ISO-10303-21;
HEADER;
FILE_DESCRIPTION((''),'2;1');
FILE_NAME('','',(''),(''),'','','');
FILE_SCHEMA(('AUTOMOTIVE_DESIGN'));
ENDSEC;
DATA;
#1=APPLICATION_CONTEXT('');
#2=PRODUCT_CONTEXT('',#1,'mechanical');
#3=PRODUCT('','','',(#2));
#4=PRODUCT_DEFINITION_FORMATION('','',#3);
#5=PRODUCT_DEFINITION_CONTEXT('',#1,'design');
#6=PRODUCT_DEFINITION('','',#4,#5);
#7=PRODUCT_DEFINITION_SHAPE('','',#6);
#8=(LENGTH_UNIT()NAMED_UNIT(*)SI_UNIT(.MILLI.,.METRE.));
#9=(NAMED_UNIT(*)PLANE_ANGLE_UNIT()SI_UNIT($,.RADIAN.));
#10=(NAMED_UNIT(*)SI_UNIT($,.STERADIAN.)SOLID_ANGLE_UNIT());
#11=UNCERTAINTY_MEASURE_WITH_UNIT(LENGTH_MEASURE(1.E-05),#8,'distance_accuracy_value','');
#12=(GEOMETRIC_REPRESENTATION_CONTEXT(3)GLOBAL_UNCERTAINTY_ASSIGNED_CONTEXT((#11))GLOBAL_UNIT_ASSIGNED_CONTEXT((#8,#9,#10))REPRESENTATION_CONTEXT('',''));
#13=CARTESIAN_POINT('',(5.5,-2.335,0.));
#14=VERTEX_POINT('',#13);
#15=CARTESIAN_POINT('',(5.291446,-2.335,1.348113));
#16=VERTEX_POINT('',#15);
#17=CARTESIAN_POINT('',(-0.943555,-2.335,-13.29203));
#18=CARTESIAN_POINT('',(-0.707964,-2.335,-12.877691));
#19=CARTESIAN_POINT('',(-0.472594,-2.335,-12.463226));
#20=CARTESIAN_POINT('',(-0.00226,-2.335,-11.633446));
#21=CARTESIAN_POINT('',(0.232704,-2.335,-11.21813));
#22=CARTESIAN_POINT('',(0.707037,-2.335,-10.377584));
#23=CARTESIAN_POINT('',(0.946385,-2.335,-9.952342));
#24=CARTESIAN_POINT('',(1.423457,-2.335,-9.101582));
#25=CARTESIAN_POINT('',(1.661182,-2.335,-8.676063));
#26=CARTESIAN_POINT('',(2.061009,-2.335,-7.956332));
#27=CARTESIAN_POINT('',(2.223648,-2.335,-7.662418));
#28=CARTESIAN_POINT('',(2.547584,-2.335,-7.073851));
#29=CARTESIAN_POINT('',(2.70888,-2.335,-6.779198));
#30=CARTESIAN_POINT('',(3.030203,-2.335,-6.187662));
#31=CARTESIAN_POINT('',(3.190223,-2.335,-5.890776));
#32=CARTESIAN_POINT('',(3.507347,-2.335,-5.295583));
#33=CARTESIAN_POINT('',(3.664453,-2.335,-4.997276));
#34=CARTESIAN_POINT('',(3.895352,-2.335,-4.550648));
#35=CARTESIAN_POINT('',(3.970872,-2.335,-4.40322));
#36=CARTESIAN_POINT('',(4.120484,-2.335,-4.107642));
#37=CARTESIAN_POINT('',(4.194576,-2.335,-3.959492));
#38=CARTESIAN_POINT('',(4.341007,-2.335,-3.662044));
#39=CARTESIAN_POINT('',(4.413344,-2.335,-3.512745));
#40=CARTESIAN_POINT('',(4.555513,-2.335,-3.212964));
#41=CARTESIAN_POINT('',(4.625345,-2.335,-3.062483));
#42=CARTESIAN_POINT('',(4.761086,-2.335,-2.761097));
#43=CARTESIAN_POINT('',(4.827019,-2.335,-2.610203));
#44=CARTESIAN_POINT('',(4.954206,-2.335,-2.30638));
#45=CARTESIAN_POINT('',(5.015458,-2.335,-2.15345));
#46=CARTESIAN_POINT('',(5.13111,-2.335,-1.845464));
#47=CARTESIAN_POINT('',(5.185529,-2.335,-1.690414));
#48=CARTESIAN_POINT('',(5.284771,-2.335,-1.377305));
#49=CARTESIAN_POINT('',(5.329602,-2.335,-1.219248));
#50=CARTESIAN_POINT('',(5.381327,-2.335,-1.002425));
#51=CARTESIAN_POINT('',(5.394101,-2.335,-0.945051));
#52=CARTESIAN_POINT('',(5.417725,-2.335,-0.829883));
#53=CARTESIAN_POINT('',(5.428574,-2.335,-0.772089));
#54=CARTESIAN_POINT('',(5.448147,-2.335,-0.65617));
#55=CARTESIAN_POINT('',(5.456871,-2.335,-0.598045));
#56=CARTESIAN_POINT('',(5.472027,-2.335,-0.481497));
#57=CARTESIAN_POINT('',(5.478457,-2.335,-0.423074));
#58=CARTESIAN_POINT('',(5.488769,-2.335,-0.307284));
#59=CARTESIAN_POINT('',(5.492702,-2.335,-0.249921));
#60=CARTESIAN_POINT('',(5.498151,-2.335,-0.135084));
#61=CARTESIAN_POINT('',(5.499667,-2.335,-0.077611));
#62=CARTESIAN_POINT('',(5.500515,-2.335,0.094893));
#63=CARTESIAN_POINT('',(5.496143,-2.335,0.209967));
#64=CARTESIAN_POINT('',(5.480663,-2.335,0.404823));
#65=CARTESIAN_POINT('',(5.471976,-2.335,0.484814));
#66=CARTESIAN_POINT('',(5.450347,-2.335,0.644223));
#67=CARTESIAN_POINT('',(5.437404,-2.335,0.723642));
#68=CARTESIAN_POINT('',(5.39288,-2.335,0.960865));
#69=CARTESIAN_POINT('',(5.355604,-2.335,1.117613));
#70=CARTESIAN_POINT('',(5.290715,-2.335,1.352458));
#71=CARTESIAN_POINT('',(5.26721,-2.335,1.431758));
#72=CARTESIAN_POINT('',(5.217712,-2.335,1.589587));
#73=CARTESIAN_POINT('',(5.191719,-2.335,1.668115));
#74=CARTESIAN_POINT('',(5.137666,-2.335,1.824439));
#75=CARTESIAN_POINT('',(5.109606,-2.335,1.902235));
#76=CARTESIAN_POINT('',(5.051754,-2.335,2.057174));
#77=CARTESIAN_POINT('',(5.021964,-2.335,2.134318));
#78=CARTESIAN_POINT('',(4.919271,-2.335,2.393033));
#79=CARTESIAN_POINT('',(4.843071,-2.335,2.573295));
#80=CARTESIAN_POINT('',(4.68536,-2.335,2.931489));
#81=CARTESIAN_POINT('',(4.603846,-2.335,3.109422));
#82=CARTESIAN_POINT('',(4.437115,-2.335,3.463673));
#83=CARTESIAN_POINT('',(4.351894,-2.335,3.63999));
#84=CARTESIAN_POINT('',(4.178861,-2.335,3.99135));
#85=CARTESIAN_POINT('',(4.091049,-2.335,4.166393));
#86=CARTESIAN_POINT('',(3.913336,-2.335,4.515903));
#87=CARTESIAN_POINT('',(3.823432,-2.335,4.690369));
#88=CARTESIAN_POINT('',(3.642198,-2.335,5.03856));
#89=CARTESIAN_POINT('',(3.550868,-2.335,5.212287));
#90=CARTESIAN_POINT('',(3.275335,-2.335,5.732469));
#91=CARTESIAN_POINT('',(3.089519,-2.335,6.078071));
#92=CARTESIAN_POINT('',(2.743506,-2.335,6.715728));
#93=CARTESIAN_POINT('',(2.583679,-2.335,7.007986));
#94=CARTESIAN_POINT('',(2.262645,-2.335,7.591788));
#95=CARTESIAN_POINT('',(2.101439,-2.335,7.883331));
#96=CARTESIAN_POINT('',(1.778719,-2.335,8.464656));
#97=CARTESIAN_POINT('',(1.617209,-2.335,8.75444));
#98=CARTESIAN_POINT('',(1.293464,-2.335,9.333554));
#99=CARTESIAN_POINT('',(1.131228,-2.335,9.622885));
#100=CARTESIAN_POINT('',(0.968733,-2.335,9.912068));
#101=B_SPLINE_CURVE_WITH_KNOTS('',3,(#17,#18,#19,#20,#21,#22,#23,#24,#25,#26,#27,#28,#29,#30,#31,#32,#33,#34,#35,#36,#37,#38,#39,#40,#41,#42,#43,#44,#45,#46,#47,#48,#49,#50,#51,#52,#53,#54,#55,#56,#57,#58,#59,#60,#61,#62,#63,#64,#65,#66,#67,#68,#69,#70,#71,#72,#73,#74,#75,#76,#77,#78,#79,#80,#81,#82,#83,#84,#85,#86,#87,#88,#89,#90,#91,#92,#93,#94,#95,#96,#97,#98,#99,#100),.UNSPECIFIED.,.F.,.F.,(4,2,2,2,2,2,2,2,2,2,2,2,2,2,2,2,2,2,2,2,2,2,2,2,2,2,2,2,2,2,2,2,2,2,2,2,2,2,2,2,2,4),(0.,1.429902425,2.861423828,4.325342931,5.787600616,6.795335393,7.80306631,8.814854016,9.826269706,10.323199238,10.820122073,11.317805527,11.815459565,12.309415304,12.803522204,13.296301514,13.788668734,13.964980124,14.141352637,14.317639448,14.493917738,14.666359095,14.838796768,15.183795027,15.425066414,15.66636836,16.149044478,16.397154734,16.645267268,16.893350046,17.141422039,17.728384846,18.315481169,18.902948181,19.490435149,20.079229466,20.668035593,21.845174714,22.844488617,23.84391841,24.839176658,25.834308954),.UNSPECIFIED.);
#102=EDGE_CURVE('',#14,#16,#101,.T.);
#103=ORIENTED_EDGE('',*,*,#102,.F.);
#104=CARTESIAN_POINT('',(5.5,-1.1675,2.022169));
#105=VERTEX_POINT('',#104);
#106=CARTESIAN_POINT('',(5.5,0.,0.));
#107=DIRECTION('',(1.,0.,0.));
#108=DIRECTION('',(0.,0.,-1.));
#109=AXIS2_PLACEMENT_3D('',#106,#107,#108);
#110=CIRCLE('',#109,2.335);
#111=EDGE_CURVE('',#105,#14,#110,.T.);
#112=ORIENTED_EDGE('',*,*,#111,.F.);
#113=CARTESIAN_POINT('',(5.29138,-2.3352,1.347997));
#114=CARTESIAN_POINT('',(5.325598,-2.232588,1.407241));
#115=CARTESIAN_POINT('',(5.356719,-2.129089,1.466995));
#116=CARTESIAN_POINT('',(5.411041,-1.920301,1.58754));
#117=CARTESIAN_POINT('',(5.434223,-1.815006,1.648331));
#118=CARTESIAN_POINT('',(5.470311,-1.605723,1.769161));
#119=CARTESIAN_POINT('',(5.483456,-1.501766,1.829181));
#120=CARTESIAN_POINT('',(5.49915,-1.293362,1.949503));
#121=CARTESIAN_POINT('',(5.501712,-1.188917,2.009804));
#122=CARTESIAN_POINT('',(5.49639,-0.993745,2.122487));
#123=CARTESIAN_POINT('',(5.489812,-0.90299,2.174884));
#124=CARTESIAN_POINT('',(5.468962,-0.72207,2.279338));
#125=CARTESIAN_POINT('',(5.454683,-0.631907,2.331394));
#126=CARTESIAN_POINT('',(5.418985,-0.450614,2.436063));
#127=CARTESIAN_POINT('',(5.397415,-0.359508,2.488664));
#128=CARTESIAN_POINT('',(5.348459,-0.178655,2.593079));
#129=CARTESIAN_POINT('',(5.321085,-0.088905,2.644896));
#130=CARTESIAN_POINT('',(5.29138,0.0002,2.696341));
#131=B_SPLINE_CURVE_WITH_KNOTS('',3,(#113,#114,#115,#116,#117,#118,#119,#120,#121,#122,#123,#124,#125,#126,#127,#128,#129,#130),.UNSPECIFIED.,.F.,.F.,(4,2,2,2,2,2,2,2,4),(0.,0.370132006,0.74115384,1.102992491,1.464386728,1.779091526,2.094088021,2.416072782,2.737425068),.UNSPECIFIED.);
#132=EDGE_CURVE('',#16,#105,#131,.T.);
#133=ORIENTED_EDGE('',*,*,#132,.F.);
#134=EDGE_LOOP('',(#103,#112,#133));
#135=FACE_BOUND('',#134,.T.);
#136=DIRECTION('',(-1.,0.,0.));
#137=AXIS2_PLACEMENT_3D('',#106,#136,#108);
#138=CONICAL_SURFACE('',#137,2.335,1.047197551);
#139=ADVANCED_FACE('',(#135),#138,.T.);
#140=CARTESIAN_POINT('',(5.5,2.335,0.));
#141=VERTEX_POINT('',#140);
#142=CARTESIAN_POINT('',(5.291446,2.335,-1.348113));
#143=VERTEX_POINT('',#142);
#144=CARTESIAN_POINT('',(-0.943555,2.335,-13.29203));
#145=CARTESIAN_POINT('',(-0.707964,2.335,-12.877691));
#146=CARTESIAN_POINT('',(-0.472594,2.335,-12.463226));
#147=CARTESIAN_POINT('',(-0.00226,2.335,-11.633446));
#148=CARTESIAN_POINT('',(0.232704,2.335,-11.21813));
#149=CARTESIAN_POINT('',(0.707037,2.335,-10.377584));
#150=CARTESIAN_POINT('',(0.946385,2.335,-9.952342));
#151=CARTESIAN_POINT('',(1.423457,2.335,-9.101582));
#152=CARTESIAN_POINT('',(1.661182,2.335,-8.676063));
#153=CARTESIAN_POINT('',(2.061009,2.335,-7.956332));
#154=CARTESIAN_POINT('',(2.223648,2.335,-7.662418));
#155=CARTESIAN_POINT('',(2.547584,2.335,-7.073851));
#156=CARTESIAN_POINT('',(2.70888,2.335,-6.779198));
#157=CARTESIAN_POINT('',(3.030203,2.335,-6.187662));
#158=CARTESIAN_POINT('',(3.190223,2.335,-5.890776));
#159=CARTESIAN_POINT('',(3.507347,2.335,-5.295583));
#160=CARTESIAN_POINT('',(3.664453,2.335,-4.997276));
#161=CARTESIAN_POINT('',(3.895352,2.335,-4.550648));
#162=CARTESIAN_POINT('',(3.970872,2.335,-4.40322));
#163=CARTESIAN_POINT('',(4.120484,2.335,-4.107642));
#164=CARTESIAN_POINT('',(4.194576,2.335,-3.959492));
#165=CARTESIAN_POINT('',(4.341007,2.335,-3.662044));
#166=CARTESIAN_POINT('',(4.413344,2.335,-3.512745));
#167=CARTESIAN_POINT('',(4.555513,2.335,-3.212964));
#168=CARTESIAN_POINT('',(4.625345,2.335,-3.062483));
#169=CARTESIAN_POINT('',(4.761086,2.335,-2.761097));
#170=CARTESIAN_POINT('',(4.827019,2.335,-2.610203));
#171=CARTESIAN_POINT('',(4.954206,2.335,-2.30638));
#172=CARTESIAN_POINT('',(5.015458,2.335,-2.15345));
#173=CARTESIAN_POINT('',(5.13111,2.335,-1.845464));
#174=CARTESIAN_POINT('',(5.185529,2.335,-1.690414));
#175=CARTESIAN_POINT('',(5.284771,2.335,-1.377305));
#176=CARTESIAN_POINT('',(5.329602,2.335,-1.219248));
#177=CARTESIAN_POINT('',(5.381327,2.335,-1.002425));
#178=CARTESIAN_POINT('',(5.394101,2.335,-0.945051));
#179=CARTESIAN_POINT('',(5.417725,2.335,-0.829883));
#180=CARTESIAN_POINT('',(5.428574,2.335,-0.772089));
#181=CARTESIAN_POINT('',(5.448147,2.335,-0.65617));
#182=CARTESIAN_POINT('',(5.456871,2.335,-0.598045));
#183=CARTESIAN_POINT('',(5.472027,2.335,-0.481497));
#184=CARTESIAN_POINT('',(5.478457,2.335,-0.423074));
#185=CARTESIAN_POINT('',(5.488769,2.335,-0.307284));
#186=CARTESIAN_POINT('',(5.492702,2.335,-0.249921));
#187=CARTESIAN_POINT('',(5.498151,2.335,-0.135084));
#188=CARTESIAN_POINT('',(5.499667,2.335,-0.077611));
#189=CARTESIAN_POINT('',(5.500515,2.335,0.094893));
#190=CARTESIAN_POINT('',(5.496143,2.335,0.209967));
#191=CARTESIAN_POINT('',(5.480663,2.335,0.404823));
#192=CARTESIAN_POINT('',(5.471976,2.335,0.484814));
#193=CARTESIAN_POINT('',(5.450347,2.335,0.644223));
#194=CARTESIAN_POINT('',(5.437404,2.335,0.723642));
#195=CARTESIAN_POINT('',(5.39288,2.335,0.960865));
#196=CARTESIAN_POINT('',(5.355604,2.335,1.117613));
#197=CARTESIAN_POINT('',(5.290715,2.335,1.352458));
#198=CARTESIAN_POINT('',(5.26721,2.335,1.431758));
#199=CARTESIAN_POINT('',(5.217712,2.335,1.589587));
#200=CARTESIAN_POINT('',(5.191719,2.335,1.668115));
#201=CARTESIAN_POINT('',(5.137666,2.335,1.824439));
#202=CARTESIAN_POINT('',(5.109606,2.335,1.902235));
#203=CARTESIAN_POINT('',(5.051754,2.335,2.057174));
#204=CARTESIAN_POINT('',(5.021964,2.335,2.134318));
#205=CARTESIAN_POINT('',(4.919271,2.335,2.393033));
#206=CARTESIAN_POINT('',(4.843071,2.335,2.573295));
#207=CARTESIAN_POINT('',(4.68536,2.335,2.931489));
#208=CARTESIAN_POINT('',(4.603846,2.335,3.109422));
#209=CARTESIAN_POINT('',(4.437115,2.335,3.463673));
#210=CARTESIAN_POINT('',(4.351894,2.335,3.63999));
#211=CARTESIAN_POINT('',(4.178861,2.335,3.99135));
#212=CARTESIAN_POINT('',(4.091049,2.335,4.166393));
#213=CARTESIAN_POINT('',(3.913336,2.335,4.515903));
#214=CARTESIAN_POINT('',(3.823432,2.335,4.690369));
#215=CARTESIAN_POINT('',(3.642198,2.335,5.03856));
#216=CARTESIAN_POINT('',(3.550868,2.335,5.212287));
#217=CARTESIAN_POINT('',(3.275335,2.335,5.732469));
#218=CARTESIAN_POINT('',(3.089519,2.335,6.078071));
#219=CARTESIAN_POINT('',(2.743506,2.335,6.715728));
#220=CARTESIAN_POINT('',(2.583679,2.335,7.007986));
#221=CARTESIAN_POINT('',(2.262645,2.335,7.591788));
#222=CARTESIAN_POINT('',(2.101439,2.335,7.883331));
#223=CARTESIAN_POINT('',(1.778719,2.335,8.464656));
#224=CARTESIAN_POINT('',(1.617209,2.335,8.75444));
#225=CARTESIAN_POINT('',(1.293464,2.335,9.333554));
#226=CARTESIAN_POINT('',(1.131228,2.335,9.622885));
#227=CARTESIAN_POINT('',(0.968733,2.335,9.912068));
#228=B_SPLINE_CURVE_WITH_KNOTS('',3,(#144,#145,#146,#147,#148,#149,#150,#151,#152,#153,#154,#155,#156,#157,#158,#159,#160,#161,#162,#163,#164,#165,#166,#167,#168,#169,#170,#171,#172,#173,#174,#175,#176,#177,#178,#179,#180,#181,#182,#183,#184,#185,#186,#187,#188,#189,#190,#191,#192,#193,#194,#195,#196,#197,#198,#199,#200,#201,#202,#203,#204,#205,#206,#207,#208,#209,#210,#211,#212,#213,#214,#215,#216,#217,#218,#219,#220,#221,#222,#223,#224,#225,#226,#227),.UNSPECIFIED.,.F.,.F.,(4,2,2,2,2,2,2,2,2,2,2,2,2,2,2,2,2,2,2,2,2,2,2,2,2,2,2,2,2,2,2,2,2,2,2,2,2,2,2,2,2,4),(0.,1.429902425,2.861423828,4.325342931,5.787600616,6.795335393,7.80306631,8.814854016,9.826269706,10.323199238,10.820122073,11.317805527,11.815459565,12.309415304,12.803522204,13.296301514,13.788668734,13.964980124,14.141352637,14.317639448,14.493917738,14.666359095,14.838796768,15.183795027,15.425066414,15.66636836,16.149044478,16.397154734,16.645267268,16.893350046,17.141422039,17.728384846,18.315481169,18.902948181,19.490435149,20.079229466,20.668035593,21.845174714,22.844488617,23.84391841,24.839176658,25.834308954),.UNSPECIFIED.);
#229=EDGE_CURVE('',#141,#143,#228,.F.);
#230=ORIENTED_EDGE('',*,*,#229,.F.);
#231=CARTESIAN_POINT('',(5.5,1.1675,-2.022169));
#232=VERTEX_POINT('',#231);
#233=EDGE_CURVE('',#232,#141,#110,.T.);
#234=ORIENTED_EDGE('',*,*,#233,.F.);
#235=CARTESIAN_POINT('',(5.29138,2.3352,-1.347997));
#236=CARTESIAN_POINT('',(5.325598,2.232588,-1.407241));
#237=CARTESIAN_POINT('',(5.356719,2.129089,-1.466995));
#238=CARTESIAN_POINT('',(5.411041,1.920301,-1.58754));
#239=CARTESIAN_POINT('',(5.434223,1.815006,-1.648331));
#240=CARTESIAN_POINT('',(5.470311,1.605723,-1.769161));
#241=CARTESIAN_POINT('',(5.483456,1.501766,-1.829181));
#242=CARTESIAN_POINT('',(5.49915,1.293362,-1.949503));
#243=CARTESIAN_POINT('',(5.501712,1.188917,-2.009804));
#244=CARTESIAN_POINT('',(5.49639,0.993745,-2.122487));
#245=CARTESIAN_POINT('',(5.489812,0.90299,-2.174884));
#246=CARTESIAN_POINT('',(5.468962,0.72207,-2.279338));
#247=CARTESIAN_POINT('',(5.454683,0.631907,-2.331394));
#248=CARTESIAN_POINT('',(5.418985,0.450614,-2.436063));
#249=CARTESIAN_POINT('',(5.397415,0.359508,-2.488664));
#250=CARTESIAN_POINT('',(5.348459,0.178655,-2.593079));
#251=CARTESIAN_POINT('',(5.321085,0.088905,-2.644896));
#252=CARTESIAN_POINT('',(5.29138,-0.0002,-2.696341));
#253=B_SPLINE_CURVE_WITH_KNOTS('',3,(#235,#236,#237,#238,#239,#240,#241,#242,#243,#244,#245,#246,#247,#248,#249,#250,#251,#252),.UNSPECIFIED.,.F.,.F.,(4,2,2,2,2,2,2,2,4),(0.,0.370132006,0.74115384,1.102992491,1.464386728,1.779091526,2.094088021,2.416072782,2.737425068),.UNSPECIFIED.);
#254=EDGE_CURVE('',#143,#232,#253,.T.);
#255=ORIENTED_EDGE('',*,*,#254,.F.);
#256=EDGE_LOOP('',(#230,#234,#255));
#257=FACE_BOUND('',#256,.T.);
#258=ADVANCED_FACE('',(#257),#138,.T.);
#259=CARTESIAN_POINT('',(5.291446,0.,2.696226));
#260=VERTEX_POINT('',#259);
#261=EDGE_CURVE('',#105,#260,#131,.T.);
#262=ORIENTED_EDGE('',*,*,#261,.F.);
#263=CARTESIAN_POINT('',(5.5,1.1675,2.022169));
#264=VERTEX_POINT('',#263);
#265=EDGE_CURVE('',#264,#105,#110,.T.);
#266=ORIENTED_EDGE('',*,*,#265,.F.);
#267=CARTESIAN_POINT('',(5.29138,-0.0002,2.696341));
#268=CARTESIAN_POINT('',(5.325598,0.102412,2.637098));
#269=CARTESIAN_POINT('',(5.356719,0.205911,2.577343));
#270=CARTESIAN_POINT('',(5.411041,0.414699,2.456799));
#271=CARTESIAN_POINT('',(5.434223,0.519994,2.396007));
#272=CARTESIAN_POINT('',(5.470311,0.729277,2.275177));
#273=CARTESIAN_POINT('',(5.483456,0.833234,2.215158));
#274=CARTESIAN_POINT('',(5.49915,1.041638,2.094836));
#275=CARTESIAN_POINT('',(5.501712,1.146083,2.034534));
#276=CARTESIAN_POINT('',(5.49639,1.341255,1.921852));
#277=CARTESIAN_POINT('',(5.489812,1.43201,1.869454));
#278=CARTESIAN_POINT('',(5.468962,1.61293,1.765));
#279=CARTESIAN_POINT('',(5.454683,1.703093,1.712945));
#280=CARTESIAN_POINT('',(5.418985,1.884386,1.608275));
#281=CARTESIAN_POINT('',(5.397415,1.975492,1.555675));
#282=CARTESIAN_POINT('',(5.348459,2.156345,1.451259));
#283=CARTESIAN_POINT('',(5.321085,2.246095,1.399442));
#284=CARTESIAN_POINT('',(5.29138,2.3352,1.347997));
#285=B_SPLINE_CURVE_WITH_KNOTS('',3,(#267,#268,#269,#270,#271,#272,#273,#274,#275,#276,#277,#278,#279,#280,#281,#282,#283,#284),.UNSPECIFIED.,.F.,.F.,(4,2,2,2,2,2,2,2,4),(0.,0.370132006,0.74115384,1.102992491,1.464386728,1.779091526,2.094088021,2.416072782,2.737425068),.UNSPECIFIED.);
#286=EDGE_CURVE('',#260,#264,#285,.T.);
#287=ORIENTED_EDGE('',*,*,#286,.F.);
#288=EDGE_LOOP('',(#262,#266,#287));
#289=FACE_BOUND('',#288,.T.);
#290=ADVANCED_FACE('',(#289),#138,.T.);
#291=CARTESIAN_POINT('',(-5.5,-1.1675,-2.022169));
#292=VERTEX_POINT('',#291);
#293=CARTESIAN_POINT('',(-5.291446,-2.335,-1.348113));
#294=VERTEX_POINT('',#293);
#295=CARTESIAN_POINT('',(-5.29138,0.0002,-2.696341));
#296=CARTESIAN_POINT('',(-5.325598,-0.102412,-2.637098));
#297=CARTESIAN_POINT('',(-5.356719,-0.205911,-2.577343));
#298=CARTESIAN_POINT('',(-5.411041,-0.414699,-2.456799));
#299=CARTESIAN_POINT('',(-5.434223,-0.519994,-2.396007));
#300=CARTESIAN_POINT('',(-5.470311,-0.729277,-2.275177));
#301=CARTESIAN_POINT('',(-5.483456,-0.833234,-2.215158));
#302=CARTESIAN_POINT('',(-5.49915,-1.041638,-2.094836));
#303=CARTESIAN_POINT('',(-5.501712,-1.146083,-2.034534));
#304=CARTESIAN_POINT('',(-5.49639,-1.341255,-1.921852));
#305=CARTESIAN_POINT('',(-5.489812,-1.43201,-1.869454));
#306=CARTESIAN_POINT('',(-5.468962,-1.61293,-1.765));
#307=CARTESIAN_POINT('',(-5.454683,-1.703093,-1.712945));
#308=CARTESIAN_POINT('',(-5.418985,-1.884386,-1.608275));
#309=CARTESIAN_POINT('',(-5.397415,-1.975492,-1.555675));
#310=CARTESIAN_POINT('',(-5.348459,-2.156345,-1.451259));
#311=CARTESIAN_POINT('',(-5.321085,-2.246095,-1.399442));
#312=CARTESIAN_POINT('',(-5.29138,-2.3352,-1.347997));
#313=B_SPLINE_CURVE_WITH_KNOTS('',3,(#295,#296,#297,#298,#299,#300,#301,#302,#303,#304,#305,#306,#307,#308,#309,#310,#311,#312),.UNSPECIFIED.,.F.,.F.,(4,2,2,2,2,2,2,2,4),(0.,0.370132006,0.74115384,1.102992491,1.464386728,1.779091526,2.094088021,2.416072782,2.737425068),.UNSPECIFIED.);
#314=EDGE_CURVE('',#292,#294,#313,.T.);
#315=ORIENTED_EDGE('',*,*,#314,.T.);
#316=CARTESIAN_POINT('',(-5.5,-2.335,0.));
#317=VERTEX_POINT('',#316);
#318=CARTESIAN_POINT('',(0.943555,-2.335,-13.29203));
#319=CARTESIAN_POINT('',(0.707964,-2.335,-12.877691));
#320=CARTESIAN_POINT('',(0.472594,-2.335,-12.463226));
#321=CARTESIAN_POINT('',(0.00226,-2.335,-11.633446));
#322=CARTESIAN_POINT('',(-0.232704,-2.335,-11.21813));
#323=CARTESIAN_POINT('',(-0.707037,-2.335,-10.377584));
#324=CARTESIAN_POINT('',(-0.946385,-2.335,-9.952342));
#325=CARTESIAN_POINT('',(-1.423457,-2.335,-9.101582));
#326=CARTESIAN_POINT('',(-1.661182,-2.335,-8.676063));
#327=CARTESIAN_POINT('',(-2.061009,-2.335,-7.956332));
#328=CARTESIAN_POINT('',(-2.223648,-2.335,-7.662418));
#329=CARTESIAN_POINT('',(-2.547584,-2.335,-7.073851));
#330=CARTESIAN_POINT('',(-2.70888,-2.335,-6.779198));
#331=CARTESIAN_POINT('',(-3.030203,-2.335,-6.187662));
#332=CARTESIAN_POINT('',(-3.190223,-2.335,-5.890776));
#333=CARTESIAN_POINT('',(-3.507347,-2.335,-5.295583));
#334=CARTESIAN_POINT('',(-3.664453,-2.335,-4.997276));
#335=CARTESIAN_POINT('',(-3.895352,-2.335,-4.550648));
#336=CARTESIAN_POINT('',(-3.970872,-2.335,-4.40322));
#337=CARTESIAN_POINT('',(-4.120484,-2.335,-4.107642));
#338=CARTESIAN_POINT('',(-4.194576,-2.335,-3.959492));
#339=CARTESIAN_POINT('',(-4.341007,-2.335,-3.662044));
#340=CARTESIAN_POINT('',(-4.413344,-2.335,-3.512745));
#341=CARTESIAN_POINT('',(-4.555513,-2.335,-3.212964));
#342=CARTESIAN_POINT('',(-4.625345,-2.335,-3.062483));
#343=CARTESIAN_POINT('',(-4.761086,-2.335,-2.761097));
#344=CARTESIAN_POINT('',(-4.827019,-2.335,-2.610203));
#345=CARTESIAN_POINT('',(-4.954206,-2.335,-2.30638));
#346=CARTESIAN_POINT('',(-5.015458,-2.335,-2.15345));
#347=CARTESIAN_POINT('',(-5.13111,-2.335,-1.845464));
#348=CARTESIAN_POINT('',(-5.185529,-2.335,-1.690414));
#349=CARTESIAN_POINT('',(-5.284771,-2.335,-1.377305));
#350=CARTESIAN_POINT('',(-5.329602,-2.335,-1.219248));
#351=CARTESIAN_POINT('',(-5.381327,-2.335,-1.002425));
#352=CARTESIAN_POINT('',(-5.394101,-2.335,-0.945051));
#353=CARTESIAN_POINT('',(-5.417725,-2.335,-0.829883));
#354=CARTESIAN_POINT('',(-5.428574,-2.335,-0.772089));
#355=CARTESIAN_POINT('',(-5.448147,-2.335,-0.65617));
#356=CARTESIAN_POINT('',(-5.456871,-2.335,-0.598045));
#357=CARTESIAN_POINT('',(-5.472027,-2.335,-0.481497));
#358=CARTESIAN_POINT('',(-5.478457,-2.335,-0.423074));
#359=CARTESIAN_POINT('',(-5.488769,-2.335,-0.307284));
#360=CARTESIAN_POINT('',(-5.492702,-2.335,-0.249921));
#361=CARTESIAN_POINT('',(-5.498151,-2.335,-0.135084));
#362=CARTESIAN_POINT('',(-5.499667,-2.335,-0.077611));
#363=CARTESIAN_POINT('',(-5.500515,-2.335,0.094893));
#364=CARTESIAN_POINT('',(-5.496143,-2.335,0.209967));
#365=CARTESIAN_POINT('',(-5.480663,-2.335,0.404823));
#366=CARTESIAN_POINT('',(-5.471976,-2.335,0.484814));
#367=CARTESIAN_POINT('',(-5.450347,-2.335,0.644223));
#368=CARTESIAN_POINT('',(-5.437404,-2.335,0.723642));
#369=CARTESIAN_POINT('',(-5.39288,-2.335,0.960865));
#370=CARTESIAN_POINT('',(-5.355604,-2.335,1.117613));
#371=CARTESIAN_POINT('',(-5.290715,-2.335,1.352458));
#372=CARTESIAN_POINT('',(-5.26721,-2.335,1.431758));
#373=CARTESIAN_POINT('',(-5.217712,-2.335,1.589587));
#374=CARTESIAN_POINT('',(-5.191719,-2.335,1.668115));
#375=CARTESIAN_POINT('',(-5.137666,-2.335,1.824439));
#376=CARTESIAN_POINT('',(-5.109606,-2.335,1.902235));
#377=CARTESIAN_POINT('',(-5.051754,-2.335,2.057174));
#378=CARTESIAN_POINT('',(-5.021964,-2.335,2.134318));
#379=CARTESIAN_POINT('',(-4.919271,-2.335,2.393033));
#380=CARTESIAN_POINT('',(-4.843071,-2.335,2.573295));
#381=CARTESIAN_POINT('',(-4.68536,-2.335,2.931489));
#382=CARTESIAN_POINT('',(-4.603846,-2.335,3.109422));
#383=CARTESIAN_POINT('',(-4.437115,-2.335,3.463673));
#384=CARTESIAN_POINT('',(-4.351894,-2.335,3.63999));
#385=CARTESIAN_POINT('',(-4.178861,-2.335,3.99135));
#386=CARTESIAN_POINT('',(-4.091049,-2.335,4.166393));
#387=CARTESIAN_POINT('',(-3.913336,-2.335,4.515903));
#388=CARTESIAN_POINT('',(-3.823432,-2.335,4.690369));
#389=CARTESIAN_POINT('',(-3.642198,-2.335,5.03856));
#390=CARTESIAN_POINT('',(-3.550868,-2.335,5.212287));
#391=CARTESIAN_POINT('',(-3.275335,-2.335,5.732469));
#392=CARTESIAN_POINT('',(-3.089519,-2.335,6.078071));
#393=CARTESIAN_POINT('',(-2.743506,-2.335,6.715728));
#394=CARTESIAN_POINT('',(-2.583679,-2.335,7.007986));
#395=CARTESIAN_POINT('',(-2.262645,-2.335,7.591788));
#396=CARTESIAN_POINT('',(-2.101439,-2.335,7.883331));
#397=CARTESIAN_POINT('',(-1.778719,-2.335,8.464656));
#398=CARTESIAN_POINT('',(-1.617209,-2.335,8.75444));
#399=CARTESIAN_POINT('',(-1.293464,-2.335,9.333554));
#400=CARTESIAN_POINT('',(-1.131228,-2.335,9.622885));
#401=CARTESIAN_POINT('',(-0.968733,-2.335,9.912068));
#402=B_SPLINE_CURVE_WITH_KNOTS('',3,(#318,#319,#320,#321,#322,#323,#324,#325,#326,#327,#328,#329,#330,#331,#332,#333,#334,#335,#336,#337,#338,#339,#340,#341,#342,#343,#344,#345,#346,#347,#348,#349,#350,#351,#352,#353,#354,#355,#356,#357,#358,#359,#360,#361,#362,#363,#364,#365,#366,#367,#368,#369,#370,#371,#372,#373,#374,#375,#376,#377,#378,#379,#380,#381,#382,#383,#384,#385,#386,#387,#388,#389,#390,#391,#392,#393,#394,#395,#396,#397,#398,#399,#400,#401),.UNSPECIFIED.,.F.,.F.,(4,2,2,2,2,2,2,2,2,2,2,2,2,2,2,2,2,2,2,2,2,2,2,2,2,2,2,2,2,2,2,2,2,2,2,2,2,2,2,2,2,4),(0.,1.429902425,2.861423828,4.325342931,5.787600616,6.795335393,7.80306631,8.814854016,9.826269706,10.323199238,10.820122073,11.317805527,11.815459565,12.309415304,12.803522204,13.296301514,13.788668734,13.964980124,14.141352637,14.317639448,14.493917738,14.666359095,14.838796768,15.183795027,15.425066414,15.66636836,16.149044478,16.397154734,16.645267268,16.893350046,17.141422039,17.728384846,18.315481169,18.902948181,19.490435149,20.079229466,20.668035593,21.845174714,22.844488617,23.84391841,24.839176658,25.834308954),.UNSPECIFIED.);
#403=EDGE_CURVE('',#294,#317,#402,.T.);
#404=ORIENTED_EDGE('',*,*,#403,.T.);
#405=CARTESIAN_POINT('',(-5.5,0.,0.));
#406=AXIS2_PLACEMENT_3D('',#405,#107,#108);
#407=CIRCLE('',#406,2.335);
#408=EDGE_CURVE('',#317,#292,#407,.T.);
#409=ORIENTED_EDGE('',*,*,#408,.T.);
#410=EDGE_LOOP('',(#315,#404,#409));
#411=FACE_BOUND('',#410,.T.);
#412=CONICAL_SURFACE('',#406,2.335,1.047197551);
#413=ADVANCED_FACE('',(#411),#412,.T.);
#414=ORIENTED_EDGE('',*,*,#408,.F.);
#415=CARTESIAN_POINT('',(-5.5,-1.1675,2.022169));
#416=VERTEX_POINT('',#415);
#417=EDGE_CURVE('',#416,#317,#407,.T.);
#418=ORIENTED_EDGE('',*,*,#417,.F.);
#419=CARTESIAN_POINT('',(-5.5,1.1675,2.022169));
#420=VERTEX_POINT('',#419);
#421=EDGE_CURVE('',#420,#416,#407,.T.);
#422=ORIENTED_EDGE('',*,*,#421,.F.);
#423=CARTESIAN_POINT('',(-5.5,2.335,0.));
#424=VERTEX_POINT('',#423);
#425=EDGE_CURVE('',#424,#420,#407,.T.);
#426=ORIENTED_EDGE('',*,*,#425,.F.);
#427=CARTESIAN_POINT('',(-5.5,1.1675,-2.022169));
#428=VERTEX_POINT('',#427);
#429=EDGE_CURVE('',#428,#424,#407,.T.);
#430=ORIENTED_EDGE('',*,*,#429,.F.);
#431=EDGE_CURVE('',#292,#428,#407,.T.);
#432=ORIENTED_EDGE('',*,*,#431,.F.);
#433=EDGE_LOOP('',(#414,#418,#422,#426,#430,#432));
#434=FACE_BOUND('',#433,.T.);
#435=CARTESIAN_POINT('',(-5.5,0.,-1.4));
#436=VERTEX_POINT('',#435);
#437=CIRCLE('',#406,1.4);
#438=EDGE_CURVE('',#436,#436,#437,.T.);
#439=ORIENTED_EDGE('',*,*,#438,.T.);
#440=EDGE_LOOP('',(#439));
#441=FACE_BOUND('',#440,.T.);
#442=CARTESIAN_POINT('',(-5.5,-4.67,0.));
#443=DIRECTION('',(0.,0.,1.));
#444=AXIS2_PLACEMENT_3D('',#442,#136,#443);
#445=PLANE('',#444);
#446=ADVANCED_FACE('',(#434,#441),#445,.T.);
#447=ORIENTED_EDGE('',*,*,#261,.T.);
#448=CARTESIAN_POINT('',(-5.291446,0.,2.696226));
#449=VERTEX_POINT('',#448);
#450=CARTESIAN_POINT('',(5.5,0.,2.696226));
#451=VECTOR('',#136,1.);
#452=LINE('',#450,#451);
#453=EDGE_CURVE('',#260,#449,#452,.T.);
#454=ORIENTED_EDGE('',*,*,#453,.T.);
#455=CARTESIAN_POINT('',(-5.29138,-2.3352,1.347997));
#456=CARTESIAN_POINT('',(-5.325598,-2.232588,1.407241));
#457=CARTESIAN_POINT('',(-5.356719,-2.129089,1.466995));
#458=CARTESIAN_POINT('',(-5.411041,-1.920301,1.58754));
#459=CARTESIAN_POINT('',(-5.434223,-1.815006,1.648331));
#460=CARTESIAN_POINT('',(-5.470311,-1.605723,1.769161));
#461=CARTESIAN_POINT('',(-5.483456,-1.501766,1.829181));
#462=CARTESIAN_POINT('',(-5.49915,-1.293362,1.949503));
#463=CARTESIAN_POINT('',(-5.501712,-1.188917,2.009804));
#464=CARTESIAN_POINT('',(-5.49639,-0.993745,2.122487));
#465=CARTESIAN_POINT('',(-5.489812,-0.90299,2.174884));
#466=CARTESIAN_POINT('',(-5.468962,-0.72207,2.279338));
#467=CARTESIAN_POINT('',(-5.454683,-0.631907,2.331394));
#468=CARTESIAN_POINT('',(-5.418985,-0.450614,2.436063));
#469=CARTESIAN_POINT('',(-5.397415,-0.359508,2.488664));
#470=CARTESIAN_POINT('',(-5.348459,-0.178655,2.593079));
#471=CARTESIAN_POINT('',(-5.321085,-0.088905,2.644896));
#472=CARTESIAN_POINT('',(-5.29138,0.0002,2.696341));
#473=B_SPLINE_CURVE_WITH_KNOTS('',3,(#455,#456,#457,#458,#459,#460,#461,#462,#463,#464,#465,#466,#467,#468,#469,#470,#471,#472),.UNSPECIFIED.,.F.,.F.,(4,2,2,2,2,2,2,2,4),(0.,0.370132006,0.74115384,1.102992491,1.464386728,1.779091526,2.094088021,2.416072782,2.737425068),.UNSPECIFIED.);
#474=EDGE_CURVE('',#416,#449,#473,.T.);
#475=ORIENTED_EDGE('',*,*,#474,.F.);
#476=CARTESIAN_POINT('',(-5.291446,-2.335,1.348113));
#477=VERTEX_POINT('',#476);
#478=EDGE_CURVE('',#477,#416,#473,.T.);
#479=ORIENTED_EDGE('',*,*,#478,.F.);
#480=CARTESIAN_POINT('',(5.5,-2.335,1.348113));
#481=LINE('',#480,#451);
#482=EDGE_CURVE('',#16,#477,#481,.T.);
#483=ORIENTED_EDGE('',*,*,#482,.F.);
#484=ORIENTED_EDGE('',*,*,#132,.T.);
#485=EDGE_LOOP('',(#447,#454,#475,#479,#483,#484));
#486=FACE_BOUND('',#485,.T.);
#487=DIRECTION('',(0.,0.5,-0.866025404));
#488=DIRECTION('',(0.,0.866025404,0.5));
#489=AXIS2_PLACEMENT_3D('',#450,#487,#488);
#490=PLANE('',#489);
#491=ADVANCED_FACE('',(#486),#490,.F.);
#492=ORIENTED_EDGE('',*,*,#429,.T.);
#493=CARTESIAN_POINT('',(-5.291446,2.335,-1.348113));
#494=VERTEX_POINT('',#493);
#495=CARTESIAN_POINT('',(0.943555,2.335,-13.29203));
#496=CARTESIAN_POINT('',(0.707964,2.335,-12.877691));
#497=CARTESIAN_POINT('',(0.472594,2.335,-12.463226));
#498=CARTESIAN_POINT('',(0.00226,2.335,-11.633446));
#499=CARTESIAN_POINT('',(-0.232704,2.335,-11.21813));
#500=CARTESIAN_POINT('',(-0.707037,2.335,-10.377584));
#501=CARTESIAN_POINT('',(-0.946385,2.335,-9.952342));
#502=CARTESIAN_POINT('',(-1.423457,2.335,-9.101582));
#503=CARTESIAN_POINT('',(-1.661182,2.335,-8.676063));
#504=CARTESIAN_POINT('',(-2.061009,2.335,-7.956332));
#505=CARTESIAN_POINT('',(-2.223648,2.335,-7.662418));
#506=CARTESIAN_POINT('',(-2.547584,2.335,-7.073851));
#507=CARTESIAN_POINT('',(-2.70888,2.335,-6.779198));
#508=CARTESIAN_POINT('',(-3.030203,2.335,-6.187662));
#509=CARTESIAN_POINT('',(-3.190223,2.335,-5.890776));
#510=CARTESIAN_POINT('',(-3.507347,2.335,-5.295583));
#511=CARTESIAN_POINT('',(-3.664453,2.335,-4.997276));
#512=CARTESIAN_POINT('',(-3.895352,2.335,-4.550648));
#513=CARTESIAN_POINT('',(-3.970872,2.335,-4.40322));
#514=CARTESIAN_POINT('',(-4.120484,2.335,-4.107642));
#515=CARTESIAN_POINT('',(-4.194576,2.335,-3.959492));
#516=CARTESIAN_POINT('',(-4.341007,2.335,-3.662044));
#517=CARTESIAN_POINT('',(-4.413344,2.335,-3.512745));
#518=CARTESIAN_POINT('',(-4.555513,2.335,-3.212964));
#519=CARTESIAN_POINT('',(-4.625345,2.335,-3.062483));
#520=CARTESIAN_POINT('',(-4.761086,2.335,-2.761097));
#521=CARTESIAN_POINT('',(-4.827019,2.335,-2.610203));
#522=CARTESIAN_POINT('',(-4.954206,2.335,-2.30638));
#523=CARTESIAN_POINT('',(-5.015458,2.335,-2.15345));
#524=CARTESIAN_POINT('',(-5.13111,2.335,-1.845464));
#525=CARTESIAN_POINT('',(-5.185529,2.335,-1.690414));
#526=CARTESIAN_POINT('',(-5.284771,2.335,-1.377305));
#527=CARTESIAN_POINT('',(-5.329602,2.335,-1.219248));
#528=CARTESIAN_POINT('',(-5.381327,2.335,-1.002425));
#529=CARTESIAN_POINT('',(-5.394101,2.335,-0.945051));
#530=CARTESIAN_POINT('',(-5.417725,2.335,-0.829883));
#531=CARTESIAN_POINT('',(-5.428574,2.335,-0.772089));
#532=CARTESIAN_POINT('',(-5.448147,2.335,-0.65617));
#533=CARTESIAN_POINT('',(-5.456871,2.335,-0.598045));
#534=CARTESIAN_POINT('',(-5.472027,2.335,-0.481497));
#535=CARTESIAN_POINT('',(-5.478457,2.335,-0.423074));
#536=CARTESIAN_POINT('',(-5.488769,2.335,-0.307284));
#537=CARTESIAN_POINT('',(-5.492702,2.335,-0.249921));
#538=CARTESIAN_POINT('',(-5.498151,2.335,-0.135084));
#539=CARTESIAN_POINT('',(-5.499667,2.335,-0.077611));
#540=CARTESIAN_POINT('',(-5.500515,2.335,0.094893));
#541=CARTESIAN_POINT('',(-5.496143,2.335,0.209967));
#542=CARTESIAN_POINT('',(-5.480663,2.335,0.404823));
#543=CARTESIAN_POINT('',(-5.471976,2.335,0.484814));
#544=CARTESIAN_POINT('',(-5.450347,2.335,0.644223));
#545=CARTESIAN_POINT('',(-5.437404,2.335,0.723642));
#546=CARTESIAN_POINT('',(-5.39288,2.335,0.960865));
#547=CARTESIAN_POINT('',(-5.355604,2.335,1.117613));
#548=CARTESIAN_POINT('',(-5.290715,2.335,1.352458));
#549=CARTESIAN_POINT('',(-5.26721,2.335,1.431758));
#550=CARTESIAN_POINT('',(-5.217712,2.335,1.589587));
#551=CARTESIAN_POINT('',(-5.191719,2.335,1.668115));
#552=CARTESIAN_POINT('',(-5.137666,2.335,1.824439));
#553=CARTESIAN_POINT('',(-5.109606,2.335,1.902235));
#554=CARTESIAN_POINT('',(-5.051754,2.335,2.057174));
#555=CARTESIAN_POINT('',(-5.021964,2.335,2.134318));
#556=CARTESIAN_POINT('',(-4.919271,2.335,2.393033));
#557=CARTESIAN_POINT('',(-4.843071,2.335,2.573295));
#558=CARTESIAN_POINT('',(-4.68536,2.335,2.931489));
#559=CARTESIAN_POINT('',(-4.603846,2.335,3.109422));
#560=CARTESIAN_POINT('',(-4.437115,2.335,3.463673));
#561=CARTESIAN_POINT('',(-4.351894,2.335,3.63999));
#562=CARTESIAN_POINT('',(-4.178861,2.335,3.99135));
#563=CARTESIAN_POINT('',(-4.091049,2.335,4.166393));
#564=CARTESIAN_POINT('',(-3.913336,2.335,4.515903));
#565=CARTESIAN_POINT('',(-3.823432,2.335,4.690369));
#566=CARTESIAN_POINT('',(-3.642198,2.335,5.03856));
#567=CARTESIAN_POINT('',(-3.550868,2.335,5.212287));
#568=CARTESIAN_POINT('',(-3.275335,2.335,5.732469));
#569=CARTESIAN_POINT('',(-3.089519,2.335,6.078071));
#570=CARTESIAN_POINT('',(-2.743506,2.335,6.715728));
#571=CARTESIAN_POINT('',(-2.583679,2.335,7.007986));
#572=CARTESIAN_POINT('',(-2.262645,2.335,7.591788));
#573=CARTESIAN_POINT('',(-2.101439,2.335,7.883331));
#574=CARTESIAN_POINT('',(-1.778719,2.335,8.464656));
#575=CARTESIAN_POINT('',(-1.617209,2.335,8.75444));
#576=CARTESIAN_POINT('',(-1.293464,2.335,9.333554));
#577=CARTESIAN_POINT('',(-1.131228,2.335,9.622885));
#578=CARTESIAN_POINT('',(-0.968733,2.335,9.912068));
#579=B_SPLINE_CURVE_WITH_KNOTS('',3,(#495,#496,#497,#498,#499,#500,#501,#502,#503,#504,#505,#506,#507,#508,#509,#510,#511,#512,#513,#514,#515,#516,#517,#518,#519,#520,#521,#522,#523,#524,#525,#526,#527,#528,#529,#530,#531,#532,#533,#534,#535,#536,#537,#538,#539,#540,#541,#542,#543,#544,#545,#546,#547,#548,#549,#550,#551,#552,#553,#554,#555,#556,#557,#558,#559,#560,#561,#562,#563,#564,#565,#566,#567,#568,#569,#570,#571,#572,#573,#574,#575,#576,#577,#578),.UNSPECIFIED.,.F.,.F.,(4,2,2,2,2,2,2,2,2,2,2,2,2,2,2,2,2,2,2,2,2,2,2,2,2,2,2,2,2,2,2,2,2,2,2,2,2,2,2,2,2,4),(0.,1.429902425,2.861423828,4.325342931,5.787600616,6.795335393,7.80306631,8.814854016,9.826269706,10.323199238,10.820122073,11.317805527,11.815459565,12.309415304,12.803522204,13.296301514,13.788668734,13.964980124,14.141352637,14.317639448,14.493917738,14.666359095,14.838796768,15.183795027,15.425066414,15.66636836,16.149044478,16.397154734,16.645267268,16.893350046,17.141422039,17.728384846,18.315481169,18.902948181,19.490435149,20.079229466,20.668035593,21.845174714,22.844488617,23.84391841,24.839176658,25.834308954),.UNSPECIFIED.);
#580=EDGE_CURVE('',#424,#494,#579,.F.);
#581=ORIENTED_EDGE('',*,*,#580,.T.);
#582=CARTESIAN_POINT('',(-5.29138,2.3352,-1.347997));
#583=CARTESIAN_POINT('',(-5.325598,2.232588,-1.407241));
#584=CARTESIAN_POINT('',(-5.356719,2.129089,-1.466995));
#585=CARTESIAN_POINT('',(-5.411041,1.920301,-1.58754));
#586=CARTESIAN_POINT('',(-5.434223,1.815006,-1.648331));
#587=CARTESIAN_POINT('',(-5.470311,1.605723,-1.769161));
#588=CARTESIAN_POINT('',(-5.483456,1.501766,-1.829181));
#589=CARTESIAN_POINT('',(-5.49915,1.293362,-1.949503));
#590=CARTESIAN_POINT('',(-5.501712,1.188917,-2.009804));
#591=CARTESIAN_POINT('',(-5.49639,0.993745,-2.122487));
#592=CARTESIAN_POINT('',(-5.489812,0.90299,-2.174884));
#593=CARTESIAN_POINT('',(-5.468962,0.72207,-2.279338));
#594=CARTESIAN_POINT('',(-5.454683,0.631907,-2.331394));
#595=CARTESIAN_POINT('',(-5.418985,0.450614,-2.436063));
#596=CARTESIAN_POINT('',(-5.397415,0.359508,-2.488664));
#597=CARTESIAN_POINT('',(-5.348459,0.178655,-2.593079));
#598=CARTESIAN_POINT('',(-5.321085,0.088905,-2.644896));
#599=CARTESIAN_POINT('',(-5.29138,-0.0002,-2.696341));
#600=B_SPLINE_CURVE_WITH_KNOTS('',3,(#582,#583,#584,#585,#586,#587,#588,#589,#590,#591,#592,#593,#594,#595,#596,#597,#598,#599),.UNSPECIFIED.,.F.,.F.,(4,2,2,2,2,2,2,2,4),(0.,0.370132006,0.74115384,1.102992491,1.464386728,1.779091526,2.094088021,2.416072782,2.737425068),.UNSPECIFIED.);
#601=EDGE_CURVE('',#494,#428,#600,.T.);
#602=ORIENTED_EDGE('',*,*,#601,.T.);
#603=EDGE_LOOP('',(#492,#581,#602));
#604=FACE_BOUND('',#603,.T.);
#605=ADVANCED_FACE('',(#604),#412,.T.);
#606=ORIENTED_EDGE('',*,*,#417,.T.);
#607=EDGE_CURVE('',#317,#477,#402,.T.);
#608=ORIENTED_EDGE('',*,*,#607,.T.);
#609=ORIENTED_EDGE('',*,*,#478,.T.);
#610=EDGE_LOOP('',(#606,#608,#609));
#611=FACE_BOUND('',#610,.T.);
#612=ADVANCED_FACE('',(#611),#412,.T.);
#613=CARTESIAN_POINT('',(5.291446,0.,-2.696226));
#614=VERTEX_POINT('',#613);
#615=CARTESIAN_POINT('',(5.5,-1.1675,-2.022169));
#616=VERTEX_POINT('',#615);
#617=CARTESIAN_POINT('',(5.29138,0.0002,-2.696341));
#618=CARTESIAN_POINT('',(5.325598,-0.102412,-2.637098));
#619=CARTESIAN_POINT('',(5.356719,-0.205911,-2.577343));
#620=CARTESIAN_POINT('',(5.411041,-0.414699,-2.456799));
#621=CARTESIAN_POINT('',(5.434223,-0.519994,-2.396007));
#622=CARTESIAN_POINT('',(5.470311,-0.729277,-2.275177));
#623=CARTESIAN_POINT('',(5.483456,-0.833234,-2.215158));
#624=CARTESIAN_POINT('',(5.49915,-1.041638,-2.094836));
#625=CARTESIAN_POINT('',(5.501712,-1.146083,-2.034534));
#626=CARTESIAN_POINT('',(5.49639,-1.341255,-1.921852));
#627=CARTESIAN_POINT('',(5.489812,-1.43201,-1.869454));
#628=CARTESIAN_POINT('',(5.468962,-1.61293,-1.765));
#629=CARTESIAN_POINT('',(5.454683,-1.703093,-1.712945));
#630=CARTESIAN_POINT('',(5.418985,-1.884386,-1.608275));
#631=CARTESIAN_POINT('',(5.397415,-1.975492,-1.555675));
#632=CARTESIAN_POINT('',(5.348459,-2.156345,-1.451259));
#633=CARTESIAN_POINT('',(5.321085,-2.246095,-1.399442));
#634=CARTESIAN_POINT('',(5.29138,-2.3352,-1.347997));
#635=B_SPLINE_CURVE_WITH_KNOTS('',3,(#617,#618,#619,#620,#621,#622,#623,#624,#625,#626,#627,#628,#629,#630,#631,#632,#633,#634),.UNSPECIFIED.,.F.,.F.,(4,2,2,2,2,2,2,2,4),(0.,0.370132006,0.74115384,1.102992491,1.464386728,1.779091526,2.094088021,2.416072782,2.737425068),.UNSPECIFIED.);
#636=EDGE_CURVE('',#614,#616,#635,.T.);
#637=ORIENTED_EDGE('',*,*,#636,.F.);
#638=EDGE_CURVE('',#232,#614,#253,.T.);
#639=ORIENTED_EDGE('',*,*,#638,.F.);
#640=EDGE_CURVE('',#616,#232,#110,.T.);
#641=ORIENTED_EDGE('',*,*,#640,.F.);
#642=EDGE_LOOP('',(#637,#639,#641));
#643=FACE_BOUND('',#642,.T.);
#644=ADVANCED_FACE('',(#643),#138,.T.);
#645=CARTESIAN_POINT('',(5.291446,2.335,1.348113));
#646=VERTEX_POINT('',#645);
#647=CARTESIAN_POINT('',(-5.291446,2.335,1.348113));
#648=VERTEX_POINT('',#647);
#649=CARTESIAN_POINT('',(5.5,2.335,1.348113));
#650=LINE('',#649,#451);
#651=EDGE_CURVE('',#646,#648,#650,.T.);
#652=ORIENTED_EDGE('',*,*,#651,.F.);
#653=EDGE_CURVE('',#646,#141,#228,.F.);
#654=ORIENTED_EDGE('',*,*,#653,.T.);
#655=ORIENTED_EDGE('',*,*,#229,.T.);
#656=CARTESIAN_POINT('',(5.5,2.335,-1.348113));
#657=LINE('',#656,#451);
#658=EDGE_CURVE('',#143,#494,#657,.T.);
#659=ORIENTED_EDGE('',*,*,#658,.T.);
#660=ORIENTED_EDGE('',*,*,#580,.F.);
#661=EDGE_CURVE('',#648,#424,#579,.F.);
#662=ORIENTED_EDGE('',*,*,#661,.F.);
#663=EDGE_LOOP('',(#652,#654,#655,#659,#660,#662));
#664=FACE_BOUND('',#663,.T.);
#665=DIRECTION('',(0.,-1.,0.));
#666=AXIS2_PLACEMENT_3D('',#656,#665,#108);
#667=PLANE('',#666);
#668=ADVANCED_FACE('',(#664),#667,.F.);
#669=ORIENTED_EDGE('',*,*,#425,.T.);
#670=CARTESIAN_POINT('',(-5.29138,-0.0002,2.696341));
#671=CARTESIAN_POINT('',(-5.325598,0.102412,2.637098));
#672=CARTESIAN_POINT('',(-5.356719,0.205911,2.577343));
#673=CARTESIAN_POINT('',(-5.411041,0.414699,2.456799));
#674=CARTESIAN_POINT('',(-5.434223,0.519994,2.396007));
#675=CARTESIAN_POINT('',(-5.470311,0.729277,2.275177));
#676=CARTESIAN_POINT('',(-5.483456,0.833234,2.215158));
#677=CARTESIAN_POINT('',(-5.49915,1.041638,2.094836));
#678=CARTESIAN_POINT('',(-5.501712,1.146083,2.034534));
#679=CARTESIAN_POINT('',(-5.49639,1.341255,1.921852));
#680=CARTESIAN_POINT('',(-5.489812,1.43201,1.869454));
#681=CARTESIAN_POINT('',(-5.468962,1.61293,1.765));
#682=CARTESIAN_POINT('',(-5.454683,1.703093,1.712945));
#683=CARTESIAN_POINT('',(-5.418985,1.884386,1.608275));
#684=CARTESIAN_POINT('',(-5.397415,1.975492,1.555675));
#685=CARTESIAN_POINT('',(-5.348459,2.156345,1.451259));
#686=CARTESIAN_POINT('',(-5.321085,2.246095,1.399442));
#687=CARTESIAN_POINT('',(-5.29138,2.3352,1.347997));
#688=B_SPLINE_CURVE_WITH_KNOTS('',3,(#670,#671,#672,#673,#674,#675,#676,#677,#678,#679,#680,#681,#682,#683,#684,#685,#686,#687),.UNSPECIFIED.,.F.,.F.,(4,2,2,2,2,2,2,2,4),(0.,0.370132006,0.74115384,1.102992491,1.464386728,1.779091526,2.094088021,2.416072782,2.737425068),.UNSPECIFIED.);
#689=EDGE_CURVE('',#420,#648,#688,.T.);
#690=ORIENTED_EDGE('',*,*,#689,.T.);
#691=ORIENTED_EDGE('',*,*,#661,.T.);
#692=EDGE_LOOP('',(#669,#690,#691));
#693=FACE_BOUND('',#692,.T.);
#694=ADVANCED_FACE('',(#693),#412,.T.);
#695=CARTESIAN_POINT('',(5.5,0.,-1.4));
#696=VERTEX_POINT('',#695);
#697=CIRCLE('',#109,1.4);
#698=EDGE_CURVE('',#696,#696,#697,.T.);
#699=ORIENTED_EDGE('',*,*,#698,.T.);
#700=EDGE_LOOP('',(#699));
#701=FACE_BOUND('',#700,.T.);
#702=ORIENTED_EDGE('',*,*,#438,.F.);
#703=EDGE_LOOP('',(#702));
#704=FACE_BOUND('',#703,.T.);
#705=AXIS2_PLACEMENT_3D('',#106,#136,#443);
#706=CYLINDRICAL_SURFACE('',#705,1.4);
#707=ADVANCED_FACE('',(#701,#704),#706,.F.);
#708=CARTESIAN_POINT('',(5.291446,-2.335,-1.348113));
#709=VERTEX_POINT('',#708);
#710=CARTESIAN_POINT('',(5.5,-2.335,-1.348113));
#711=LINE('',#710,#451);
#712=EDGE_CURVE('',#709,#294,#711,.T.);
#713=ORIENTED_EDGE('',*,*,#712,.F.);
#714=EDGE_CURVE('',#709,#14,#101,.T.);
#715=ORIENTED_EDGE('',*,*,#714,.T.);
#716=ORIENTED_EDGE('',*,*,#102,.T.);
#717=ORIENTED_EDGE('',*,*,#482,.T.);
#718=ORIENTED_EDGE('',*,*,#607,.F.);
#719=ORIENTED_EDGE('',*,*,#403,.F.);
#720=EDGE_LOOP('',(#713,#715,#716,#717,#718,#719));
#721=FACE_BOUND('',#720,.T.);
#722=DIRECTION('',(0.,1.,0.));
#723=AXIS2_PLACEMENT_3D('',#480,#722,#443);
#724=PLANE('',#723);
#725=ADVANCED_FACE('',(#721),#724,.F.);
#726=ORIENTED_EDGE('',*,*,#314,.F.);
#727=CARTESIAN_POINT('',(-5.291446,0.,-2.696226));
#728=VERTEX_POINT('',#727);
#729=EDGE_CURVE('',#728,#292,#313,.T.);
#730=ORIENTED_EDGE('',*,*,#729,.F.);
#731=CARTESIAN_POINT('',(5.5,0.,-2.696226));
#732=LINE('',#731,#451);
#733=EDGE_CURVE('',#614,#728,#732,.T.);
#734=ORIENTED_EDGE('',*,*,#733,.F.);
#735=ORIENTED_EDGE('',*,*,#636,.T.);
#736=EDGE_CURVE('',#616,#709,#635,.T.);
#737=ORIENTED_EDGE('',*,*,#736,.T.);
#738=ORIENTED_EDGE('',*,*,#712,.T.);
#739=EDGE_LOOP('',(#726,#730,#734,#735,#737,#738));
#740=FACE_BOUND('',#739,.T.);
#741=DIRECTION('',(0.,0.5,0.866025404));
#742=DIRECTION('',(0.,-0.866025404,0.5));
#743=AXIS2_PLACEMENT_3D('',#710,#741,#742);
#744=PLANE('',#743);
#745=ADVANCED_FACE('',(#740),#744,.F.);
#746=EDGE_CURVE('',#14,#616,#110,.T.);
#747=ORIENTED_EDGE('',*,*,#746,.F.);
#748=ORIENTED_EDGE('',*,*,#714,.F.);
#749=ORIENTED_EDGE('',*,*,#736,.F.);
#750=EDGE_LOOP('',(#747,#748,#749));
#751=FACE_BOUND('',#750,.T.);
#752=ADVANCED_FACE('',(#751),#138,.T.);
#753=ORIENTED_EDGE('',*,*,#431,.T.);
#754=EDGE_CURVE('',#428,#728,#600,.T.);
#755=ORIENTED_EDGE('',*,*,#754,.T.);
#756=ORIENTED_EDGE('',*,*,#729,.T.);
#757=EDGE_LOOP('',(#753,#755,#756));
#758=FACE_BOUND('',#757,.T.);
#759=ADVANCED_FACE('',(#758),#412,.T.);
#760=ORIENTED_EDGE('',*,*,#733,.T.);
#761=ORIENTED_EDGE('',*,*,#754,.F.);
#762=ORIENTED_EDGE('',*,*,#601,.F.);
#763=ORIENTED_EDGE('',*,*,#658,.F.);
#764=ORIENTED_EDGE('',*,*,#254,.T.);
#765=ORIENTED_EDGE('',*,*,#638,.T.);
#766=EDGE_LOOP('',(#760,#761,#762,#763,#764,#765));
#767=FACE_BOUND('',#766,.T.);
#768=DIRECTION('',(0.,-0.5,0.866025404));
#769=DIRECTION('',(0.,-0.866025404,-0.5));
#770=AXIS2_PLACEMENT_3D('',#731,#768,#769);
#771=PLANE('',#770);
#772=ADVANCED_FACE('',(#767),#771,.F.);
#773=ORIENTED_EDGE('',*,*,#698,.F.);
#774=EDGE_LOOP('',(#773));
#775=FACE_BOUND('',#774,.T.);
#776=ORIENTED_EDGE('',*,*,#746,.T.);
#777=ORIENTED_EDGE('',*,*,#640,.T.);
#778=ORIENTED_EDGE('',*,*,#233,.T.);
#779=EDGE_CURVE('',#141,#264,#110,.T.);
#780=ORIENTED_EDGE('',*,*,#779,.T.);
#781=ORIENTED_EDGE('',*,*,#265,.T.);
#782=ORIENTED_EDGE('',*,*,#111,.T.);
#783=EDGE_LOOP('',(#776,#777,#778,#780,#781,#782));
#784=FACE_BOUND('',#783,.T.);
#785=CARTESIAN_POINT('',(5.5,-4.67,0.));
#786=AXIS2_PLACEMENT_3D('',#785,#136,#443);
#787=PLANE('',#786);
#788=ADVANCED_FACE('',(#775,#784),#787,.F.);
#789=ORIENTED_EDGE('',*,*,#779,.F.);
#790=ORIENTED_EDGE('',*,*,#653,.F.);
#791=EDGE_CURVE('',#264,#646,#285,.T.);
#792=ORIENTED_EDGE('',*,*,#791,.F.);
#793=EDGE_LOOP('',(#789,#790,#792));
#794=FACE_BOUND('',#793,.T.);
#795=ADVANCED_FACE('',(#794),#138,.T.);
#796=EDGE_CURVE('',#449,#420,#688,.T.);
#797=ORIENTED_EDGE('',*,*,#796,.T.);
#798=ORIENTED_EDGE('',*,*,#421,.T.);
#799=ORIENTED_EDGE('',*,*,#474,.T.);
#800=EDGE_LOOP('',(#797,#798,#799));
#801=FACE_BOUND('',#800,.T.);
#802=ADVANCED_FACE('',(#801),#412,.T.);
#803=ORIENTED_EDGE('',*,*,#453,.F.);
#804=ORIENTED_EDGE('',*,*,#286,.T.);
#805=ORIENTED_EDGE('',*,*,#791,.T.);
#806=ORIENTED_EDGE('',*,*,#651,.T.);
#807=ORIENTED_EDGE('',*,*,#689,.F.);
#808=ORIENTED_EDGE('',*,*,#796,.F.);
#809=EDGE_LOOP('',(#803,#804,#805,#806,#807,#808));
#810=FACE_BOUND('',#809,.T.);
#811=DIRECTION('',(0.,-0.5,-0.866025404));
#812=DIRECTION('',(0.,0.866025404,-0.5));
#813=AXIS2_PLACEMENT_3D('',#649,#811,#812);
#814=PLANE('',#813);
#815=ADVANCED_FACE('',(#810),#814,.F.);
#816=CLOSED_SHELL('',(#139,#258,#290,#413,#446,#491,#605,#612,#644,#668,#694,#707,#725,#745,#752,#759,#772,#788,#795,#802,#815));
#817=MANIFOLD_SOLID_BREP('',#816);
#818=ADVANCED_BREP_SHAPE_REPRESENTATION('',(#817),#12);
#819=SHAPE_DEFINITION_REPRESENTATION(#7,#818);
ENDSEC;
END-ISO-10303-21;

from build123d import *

# Parameters (mm, degrees)
SKETCH1_R      = 1.4
EXTRUDE1_DEPTH = 5.5


# Read off the part's stored shape, not the designer's step: Cut-Extrude1
with BuildPart() as part:
    # Sketch1 → Extrude1 (new, symmetric)
    with BuildSketch(Plane(origin=(0, 0, 0), x_dir=(0, 0, -1), z_dir=(1, 0, 0))):
        Polygon((2.696225757, 0), (1.348112879, 2.335), (-1.348112879, 2.335), (-2.696225757, 0), (-1.348112879, -2.335), (1.348112879, -2.335), align=None)
        Circle(SKETCH1_R, mode=Mode.SUBTRACT)
    extrude(amount=EXTRUDE1_DEPTH, both=True)

    # Cut-Extrude1 outline → Cut-Extrude1 (revolve, cut)
    with BuildSketch(Plane.YX):
        Polygon((2.696225758, 5.5), (2.335, 5.5), (2.696225751, 5.291446215), align=None)
    cut_extrude1 = revolve(axis=Axis((0, 0, 0), (1, 0, 0)), mode=Mode.SUBTRACT)

    # Mirror1: Cut-Extrude1 across plane
    add(cut_extrude1.mirror(Plane(origin=(0, 0, 0), x_dir=(0, 0, 1), z_dir=(1, 0, 0))), mode=Mode.SUBTRACT)


solid = part.part
